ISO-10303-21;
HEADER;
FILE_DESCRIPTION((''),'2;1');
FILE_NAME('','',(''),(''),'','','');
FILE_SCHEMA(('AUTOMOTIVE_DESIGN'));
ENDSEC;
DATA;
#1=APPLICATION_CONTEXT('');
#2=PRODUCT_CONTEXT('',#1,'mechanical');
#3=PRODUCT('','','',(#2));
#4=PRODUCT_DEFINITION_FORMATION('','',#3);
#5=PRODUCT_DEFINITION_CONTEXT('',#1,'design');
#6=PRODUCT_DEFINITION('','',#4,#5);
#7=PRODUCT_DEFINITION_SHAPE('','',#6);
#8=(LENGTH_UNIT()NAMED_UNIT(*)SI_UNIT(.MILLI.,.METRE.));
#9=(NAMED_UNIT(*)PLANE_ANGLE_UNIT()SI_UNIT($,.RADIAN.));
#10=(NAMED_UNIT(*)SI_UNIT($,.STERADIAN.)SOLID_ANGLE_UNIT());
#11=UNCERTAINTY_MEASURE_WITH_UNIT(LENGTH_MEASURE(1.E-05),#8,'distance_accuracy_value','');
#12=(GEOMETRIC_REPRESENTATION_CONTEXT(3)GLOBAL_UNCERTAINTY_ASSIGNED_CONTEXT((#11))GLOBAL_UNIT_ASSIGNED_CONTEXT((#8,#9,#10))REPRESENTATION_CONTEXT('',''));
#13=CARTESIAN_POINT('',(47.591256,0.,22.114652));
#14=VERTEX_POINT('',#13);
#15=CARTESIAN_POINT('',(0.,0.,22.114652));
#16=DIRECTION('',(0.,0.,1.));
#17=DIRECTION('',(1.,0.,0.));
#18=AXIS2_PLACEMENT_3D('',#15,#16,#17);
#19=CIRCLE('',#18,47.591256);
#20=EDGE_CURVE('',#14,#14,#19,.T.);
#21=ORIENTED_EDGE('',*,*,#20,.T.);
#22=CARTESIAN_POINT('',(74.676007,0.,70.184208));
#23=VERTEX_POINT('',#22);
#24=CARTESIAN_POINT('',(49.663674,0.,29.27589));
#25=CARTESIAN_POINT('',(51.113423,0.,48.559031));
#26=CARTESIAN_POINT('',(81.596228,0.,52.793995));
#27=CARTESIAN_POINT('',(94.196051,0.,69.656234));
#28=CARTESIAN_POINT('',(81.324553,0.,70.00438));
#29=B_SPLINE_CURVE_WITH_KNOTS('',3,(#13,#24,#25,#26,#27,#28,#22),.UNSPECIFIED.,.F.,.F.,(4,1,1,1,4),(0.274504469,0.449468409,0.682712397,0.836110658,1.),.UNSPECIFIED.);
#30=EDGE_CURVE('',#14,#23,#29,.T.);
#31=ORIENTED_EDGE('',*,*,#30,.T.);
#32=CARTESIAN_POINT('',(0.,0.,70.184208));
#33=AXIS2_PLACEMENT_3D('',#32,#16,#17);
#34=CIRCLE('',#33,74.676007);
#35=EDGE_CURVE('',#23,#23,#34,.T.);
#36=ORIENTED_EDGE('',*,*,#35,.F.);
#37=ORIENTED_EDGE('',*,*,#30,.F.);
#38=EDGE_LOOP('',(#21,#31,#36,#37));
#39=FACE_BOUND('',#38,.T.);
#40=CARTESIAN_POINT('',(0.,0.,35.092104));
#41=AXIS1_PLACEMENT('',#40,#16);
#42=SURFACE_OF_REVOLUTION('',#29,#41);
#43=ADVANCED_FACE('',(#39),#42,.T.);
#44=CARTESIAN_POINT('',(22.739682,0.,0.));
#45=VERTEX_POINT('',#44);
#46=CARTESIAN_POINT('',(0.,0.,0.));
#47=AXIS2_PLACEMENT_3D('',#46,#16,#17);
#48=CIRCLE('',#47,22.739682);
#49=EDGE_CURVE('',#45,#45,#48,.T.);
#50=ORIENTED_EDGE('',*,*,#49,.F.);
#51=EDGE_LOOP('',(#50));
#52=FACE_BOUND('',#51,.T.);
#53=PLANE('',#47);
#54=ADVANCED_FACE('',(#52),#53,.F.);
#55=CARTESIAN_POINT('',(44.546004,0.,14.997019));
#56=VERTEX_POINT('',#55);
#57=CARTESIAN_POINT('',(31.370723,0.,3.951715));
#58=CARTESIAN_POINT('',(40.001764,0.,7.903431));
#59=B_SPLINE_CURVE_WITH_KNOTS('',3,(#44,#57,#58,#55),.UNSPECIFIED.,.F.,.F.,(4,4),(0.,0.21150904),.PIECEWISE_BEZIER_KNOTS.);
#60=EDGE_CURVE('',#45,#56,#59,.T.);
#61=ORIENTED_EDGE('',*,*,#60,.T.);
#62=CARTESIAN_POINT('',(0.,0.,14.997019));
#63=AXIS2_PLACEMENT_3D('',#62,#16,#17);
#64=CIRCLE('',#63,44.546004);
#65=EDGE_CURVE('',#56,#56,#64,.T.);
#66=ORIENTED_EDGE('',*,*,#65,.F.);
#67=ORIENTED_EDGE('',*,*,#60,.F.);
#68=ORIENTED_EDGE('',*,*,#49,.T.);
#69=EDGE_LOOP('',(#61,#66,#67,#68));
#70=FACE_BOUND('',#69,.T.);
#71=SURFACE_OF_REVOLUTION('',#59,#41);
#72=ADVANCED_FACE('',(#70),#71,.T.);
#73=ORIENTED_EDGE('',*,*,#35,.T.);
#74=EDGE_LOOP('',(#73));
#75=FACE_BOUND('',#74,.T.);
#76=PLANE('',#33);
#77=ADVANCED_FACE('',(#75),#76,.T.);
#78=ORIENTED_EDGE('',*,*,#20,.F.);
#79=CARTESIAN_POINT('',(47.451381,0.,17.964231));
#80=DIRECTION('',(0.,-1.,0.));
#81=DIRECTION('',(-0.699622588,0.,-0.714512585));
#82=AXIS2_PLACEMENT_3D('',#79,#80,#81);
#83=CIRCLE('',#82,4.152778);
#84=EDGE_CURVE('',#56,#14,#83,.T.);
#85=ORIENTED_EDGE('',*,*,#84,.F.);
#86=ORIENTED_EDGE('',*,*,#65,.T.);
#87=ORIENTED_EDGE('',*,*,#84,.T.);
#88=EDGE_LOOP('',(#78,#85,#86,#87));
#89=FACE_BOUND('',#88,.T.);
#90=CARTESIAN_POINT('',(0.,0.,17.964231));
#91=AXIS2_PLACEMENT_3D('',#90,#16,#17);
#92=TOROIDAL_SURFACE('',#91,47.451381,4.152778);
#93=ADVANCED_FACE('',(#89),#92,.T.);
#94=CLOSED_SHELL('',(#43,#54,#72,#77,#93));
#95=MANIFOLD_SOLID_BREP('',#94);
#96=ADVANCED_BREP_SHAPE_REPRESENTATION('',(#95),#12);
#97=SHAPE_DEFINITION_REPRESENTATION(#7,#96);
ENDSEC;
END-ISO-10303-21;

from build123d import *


with BuildPart() as f1:
    # F0 (on Front) → F1 (revolve)
    with BuildSketch(Plane.XZ):
        with BuildLine():
            Line((0, 70.1842084527), (0, 0))
            Line((0, 0), (22.7396823466, 0))
            add(Edge.make_bspline(
                [(22.7396823466, 0), (31.3707231713, 3.9517153813), (40.001763996, 7.9034307625), (44.5460036318, 14.9970185966)],
                knots=[0, 0, 0, 0, 0.2115090405, 0.2115090405, 0.2115090405, 0.2115090405], degree=3))
            add(Edge.make_bspline(
                [(44.5460036318, 14.9970185966), (44.8174749118, 15.4207870426), (46.0982067573, 17.5894295368), (46.994751399, 20.0534294847), (47.5912563159, 22.1146519768)],
                knots=[0.2115090405, 0.2115090405, 0.2115090405, 0.2115090405, 0.2241445163, 0.2745044692, 0.2745044692, 0.2745044692, 0.2745044692], degree=3))
            add(Edge.make_bspline(
                [(47.5912563159, 22.1146519768), (49.663673869, 29.2758899683), (51.1134227247, 48.5590309681), (81.5962278167, 52.7939949916), (94.1960510541, 69.6562341921), (81.3245532577, 70.0043798994), (74.6760070324, 70.1842084527)],
                knots=[0.2745044692, 0.2745044692, 0.2745044692, 0.2745044692, 0.449468409, 0.6827123966, 0.8361106585, 1, 1, 1, 1], degree=3))
            Line((74.6760070324, 70.1842084527), (0, 70.1842084527))
        make_face()
        with BuildLine():
            add(Edge.make_bspline(
                [(44.5460036318, 14.9970185966), (44.8174749118, 15.4207870426), (46.0982067573, 17.5894295368), (46.994751399, 20.0534294847), (47.5912563159, 22.1146519768)],
                knots=[0.2115090405, 0.2115090405, 0.2115090405, 0.2115090405, 0.2241445163, 0.2745044692, 0.2745044692, 0.2745044692, 0.2745044692], degree=3))
            ThreePointArc((44.5460036318, 14.9970185966), (51.2693875538, 16.3307107075), (47.5912563159, 22.1146519768))
        make_face()
    revolve(axis=Axis((0, 0, 35.0921042264), (0, 0, 1)))


solid = f1.part
